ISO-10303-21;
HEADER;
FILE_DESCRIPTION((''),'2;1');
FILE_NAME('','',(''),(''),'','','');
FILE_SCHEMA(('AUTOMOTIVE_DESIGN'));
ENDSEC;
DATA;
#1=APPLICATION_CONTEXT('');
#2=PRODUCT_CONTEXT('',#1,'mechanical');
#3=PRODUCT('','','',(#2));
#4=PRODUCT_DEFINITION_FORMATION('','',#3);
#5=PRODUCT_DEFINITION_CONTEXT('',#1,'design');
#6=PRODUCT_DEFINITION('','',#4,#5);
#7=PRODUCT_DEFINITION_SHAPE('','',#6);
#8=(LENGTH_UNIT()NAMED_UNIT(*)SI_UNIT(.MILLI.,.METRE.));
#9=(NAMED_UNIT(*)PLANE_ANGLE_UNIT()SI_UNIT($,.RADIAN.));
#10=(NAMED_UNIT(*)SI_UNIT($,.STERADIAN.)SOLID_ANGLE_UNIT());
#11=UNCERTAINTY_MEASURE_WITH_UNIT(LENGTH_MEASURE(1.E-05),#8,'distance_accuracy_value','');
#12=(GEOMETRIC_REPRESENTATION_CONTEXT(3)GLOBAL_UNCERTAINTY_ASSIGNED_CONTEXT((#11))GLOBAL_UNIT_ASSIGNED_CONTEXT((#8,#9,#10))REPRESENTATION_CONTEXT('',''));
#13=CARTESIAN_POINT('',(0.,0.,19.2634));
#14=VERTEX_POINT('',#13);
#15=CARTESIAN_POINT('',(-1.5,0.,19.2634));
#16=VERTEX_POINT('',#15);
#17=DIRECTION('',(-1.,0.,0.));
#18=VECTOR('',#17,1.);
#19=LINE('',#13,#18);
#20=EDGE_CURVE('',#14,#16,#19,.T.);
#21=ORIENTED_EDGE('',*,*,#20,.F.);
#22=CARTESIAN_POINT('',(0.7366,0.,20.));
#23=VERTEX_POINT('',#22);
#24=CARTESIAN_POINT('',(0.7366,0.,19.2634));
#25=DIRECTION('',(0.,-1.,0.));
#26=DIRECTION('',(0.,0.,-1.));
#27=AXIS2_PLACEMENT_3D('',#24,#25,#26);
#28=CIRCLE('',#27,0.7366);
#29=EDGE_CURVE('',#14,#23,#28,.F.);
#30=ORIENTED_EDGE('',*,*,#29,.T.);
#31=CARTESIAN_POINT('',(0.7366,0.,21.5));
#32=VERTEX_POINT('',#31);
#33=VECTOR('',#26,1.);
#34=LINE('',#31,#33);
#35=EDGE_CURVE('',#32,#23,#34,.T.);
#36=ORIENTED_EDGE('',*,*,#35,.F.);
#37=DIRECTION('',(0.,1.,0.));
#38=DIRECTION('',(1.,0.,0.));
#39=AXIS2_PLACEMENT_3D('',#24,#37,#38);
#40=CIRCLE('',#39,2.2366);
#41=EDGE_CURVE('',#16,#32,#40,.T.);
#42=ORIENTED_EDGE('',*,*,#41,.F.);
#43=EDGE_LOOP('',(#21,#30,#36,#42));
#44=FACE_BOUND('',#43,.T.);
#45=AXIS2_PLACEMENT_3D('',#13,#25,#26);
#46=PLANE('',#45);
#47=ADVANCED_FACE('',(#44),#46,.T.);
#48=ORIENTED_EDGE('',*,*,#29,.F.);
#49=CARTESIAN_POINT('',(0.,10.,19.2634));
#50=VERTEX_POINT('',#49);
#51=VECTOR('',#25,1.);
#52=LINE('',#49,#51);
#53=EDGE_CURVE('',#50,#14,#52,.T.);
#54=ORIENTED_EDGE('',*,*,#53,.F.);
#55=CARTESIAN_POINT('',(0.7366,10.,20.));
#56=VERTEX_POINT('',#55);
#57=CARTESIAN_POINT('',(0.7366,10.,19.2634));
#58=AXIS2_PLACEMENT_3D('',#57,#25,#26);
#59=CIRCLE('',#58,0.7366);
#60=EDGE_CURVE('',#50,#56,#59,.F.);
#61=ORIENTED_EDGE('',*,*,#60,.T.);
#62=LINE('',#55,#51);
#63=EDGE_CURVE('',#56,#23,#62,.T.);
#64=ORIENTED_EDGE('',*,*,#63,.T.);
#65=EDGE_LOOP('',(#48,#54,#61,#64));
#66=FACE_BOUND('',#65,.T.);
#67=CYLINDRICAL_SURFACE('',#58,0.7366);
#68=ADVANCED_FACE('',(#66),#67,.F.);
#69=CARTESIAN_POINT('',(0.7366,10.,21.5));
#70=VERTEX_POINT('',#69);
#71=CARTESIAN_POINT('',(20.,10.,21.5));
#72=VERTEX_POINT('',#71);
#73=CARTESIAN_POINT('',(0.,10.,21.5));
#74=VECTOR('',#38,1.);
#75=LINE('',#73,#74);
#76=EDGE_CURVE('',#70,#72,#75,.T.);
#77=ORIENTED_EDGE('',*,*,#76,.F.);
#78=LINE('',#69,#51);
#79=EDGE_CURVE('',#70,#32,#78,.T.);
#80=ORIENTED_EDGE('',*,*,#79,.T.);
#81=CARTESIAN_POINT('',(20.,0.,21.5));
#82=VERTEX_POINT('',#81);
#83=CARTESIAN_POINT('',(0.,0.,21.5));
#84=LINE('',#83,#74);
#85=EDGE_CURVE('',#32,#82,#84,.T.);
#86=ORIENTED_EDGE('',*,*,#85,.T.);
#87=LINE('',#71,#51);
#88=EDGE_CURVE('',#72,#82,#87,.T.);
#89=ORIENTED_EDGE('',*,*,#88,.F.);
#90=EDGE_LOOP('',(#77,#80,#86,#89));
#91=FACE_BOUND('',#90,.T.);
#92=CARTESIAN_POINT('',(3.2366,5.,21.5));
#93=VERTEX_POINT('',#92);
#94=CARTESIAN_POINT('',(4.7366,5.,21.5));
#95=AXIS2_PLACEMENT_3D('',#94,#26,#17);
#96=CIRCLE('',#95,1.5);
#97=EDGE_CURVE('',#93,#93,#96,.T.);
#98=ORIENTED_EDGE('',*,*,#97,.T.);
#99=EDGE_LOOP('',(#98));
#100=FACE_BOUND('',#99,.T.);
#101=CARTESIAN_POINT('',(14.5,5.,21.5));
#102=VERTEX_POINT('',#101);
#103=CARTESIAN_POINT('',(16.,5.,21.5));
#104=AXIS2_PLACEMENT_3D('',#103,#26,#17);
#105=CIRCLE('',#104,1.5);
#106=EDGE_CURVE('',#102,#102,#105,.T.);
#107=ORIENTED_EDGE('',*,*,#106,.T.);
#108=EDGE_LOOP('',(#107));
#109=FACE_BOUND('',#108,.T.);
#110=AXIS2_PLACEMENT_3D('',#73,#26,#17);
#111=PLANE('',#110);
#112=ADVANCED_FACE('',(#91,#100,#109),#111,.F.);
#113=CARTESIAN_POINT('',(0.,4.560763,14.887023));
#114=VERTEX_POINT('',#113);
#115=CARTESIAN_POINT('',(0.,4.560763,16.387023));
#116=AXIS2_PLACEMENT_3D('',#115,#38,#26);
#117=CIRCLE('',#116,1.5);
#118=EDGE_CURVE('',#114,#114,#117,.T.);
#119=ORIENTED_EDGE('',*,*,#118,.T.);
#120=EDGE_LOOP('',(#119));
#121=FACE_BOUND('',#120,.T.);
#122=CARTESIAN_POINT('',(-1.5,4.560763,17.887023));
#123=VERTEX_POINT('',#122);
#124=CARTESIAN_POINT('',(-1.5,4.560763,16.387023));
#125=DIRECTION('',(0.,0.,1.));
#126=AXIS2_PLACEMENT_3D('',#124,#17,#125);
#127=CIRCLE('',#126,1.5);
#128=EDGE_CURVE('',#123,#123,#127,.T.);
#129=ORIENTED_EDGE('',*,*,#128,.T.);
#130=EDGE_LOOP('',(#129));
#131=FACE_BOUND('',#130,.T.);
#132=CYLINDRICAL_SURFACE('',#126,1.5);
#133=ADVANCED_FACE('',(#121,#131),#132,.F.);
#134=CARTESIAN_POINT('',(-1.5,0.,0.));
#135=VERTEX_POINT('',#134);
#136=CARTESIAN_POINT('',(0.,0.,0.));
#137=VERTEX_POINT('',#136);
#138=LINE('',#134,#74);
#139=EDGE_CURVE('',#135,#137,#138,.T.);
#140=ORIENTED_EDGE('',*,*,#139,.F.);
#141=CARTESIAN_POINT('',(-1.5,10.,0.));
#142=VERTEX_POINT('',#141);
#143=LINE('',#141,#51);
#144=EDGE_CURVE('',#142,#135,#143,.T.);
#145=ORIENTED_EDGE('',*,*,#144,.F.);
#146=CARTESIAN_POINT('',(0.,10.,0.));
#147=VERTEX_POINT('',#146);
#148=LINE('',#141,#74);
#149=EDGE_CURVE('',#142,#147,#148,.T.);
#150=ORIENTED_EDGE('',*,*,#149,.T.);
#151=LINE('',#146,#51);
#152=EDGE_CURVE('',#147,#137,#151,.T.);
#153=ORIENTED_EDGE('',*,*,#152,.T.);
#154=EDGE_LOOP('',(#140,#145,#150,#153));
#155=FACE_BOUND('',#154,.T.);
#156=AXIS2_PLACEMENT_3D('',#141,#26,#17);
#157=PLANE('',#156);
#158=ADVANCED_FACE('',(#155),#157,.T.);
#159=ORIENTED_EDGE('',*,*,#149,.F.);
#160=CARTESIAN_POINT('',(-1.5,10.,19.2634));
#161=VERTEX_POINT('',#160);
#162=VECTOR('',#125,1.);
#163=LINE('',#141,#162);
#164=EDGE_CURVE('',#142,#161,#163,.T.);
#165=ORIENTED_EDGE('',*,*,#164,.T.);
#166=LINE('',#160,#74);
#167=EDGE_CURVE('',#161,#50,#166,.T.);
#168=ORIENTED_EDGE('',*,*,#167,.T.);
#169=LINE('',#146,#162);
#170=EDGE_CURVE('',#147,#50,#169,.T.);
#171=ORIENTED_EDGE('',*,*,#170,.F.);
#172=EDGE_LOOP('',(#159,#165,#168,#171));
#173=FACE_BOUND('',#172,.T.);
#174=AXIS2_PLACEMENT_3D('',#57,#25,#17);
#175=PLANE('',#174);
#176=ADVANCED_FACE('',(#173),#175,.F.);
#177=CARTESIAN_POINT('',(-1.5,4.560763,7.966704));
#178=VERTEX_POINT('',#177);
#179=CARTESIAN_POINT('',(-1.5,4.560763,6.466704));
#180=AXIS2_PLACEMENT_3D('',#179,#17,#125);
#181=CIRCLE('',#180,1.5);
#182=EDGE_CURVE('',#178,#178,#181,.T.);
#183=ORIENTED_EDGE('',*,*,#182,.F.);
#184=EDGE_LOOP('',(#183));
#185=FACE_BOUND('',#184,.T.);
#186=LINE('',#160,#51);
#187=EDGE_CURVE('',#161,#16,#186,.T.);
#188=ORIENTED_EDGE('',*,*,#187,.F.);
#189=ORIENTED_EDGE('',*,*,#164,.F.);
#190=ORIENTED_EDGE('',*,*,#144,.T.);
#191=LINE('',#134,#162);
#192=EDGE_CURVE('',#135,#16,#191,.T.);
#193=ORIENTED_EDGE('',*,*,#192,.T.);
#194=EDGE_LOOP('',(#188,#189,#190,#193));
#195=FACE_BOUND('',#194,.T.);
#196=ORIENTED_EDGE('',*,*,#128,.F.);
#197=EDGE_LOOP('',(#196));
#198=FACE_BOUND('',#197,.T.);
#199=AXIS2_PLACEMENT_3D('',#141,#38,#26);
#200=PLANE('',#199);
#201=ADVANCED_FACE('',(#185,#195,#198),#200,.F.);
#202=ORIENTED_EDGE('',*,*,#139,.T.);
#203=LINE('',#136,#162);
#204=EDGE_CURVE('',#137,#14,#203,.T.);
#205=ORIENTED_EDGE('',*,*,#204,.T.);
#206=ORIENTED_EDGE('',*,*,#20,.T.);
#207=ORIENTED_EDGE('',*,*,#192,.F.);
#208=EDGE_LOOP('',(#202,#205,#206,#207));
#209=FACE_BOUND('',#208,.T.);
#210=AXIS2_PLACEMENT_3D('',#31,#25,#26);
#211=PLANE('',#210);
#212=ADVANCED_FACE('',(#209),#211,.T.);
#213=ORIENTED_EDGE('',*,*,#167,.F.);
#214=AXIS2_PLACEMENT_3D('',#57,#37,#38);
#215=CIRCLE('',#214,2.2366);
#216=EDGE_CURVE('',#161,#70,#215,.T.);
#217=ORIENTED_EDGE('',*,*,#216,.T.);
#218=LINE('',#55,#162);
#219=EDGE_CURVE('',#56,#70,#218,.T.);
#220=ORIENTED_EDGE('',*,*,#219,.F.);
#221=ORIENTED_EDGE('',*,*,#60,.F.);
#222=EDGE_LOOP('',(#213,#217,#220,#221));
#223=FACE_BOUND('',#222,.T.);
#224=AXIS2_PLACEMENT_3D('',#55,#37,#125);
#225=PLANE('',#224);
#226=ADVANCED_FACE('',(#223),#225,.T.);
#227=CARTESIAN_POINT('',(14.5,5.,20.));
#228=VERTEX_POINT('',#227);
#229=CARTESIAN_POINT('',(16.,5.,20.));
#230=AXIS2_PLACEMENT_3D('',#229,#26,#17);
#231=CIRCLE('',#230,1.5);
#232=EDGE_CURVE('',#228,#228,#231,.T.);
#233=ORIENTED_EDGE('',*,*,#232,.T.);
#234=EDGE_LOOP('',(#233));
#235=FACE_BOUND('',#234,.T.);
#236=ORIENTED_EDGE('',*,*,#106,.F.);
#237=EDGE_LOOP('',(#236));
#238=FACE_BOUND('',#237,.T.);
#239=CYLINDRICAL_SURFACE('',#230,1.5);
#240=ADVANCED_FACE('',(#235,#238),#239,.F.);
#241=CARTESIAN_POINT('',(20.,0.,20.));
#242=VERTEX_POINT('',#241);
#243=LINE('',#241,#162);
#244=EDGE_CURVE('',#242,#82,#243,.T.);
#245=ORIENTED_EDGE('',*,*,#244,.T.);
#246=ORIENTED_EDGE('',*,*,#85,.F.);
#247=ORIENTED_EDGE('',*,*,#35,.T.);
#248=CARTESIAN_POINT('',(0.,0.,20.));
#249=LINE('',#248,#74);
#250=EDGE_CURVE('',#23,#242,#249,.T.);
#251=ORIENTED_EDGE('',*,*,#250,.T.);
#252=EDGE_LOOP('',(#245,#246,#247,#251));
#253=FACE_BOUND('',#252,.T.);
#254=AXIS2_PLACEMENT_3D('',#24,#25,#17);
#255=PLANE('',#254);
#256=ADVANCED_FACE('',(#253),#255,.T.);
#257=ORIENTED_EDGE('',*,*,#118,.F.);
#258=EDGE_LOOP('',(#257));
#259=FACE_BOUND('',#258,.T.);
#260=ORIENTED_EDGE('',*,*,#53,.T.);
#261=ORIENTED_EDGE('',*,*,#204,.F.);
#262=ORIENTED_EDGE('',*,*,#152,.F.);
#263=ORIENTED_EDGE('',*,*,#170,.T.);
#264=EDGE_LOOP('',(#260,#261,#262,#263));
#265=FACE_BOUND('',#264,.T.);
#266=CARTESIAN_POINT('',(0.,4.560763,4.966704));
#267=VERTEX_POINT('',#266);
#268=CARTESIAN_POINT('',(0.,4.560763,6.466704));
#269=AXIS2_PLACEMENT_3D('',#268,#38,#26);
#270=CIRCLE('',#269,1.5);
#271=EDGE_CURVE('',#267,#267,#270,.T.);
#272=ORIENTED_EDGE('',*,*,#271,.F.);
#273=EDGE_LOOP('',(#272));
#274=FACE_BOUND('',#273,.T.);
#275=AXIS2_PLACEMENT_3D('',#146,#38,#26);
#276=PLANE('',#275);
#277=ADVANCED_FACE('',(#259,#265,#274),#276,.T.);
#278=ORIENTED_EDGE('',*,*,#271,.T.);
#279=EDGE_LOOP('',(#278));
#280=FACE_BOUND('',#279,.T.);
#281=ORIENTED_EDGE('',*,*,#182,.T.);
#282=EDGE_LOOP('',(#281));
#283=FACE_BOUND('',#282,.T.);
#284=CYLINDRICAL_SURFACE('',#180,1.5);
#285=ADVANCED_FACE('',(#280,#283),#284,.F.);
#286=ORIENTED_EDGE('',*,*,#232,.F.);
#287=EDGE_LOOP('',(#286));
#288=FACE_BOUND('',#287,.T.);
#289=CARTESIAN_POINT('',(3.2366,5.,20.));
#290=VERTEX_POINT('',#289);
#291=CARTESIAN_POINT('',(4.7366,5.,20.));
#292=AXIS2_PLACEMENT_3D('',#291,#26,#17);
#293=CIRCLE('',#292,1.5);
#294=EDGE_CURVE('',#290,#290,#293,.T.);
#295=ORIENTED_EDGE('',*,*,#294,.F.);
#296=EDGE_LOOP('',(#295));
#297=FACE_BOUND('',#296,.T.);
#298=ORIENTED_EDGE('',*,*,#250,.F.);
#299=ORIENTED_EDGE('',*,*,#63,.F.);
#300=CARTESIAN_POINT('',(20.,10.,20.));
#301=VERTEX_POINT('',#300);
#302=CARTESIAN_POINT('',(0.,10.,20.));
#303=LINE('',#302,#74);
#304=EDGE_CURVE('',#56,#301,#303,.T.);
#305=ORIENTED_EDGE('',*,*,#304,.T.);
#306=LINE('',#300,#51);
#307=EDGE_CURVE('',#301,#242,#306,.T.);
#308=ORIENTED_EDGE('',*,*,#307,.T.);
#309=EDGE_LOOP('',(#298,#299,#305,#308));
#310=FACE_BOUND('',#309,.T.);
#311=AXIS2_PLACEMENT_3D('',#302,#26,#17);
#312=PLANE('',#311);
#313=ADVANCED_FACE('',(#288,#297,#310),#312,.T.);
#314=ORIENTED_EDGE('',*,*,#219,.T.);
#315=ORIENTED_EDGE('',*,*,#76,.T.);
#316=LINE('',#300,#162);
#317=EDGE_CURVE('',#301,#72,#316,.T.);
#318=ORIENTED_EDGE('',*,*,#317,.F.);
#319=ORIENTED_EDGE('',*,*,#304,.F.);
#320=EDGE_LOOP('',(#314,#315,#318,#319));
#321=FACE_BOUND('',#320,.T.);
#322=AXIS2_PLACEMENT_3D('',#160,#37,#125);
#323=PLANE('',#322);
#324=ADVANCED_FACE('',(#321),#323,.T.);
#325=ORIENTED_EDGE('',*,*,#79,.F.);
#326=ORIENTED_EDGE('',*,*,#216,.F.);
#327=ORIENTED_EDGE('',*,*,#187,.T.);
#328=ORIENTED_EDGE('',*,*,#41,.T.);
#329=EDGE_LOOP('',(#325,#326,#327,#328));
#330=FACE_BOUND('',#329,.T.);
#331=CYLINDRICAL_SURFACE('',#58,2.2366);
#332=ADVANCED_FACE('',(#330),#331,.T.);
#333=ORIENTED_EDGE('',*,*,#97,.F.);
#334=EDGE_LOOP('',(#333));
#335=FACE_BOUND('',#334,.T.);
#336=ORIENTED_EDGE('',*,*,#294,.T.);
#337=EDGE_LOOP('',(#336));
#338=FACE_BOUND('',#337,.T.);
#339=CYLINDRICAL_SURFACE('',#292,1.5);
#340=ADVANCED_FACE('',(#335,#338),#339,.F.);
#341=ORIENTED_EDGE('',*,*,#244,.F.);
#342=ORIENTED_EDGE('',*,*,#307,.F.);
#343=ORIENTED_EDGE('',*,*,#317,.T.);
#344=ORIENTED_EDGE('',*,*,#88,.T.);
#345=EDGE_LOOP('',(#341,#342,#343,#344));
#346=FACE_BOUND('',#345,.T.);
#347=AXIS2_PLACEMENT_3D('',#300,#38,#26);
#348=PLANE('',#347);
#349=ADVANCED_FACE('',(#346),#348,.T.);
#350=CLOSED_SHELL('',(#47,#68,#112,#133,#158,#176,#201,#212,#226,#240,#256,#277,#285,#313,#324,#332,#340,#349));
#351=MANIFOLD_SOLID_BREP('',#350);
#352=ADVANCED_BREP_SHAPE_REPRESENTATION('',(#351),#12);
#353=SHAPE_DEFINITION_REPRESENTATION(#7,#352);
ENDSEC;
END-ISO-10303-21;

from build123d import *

# Parameters (mm, degrees)
BASE_FLANGE1_DEPTH                 = 10
F_3_0MM_TRANSITIONAL_DOWEL_HOLE1_D = 3
F_3_0MM_PRESS_DOWEL_HOLE1_D        = 3


# Sheet-metal steps are written as plain solids
with BuildPart() as part:
    # Sketch1 → Base-Flange1 (new body)
    with BuildSketch(Plane(origin=(0, 0, 0), x_dir=(1, 0, 0), z_dir=(0, 1, 0))):
        with BuildLine():
            Line((0, 0), (0, -19.2634))
            ThreePointArc((0, -19.2634), (0.215745145, -19.784254855), (0.7366, -20))
            Line((0.7366, -20), (20, -20))
            Line((20, -20), (20, -21.5))
            Line((20, -21.5), (0.7366, -21.5))
            ThreePointArc((0.7366, -21.5), (-0.844915027, -20.844915027), (-1.5, -19.2634))
            Line((-1.5, -19.2634), (-1.5, 0))
            Line((-1.5, 0), (0, 0))
        make_face()
    extrude(amount=BASE_FLANGE1_DEPTH)

    # Ø3.0mm Transitional Dowel Hole1 (through all)
    with Locations(Plane.ZY.offset(1.5)):
        with Locations((16.387023366, 4.560762846), (6.466703516, 4.560762846)):
            Hole(F_3_0MM_TRANSITIONAL_DOWEL_HOLE1_D / 2)

    # Ø3.0mm Press Dowel Hole1 (through all)
    with Locations(Plane(origin=(0, 0, 20), x_dir=(-1, 0, 0), z_dir=(0, 0, -1))):
        with Locations((-4.7366, 5), (-16, 5)):
            Hole(F_3_0MM_PRESS_DOWEL_HOLE1_D / 2)


solid = part.part
